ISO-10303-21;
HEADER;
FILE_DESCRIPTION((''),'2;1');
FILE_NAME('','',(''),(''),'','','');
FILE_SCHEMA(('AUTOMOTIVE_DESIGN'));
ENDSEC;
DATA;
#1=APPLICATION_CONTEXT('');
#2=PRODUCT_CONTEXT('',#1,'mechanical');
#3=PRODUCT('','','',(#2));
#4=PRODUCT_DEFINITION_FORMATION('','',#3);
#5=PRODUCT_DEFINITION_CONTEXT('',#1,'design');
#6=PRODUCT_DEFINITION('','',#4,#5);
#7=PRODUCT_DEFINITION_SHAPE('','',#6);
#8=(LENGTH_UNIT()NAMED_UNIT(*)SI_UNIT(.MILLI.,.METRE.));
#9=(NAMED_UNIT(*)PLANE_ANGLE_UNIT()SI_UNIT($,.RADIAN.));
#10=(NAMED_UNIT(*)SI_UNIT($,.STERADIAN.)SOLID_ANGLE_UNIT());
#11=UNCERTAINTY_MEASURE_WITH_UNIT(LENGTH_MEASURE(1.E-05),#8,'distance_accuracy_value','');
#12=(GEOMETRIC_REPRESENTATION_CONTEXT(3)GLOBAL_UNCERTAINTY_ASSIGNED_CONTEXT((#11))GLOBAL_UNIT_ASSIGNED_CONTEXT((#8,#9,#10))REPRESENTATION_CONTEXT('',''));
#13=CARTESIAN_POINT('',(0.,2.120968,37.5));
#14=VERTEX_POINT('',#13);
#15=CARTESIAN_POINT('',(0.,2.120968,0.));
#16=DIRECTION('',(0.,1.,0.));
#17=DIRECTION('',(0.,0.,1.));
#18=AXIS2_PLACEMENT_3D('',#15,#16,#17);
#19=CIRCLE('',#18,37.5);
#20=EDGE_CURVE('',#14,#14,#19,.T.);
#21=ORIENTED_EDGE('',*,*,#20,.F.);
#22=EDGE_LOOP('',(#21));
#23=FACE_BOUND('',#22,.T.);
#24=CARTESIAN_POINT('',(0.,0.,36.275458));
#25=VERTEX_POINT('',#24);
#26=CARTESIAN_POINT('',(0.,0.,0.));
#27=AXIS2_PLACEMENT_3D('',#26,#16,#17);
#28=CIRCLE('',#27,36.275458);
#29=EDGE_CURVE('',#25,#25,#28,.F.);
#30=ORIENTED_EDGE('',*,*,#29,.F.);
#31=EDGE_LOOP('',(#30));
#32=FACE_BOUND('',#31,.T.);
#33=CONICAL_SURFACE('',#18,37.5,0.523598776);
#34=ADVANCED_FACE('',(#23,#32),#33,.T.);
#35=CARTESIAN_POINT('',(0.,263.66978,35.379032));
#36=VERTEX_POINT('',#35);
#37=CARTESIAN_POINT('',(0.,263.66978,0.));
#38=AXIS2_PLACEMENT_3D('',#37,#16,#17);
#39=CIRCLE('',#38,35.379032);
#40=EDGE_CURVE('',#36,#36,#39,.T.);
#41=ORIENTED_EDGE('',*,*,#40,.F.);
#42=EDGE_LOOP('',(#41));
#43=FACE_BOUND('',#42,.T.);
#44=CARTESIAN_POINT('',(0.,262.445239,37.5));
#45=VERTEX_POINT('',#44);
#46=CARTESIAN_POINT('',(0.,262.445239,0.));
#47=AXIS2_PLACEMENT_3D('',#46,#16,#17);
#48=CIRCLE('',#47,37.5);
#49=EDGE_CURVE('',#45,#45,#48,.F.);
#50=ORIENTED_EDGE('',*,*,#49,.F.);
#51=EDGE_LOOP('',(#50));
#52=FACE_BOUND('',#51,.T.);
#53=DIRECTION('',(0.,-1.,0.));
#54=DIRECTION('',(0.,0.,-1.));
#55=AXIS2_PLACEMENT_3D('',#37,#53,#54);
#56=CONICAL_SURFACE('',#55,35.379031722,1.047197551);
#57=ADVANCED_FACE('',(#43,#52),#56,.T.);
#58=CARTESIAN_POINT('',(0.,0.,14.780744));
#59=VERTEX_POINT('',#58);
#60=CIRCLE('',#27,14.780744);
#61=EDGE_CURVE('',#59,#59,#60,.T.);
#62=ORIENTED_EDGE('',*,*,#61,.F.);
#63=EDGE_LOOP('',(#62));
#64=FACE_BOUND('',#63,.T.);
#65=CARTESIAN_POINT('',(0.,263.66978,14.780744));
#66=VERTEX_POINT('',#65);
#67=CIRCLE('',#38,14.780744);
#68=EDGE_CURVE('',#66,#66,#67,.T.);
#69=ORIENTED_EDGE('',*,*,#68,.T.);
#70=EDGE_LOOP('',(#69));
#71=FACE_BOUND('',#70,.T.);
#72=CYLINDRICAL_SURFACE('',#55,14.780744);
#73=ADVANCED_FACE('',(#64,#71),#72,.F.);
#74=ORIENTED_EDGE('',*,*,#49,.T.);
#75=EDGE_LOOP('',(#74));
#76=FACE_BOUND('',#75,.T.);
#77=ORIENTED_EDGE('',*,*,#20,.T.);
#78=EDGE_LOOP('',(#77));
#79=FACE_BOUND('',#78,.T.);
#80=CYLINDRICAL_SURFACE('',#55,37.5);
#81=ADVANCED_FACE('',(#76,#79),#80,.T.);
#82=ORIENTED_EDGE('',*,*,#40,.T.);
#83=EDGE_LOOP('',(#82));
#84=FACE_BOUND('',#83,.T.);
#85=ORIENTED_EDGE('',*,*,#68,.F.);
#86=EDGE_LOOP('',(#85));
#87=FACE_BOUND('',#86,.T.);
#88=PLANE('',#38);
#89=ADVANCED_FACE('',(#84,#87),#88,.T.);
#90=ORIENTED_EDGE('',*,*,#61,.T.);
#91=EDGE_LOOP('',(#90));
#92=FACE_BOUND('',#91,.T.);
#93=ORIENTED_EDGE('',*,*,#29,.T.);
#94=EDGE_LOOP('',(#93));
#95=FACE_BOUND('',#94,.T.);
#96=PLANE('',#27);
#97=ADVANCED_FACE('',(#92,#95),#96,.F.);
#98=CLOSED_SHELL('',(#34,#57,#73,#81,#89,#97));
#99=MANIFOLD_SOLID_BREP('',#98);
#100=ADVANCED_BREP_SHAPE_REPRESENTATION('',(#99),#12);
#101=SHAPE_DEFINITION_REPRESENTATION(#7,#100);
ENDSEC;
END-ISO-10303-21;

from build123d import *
from OCP.BRepFilletAPI import BRepFilletAPI_MakeChamfer

# Parameters (mm, degrees)
SKETCH1_R           = 37.5
BOSS_EXTRUDE1_DEPTH = 263.669780207
SKETCH2_R           = 14.780743644
CUT_EXTRUDE1_DEPTH  = 269.950279781
CHAMFER1_SIZE       = 1.224541606
CHAMFER1_SIZE2      = 2.120968278


with BuildPart() as part:
    # Sketch1 → Boss-Extrude1 (new body)
    with BuildSketch(Plane(origin=(0, 0, 0), x_dir=(1, 0, 0), z_dir=(0, 1, 0))):
        Circle(SKETCH1_R)
    extrude(amount=BOSS_EXTRUDE1_DEPTH)

    # Sketch2 → Cut-Extrude1 (cut, through all)
    with BuildSketch(Plane(origin=(0, 0, 0), x_dir=(1, 0, 0), z_dir=(0, 1, 0))):
        Circle(SKETCH2_R)
    extrude(amount=CUT_EXTRUDE1_DEPTH, mode=Mode.SUBTRACT)

    # Chamfer1: one chamfer whose edges measure the first distance from different faces: ONE call of the kernel's chamfer builder (chamfer() names one face for all edges)
    chamfer1_edges_1 = [part.edges().sort_by_distance(p)[0] for p in [
        (-37.5, 263.669780207, 0),
    ]]
    chamfer1_side_1 = [part.faces().sort_by_distance(p)[0] for p in [
        (-37.5, 131.834890103, 0),
    ]]
    chamfer1_edges_2 = [part.edges().sort_by_distance(p)[0] for p in [
        (-37.5, 0, 0),
    ]]
    chamfer1_side_2 = [part.faces().sort_by_distance(p)[0] for p in [
        (-36.439339828, 0, 0),
    ]]
    chamfer1 = BRepFilletAPI_MakeChamfer(part.part.solid().wrapped)
    for e in chamfer1_edges_1:
        chamfer1.Add(CHAMFER1_SIZE, CHAMFER1_SIZE2, e.wrapped, chamfer1_side_1[0].wrapped)  # the first distance lies on this face
    for e in chamfer1_edges_2:
        chamfer1.Add(CHAMFER1_SIZE, CHAMFER1_SIZE2, e.wrapped, chamfer1_side_2[0].wrapped)  # the first distance lies on this face
    add(Compound.cast(chamfer1.Shape()), mode=Mode.REPLACE)


solid = part.part
